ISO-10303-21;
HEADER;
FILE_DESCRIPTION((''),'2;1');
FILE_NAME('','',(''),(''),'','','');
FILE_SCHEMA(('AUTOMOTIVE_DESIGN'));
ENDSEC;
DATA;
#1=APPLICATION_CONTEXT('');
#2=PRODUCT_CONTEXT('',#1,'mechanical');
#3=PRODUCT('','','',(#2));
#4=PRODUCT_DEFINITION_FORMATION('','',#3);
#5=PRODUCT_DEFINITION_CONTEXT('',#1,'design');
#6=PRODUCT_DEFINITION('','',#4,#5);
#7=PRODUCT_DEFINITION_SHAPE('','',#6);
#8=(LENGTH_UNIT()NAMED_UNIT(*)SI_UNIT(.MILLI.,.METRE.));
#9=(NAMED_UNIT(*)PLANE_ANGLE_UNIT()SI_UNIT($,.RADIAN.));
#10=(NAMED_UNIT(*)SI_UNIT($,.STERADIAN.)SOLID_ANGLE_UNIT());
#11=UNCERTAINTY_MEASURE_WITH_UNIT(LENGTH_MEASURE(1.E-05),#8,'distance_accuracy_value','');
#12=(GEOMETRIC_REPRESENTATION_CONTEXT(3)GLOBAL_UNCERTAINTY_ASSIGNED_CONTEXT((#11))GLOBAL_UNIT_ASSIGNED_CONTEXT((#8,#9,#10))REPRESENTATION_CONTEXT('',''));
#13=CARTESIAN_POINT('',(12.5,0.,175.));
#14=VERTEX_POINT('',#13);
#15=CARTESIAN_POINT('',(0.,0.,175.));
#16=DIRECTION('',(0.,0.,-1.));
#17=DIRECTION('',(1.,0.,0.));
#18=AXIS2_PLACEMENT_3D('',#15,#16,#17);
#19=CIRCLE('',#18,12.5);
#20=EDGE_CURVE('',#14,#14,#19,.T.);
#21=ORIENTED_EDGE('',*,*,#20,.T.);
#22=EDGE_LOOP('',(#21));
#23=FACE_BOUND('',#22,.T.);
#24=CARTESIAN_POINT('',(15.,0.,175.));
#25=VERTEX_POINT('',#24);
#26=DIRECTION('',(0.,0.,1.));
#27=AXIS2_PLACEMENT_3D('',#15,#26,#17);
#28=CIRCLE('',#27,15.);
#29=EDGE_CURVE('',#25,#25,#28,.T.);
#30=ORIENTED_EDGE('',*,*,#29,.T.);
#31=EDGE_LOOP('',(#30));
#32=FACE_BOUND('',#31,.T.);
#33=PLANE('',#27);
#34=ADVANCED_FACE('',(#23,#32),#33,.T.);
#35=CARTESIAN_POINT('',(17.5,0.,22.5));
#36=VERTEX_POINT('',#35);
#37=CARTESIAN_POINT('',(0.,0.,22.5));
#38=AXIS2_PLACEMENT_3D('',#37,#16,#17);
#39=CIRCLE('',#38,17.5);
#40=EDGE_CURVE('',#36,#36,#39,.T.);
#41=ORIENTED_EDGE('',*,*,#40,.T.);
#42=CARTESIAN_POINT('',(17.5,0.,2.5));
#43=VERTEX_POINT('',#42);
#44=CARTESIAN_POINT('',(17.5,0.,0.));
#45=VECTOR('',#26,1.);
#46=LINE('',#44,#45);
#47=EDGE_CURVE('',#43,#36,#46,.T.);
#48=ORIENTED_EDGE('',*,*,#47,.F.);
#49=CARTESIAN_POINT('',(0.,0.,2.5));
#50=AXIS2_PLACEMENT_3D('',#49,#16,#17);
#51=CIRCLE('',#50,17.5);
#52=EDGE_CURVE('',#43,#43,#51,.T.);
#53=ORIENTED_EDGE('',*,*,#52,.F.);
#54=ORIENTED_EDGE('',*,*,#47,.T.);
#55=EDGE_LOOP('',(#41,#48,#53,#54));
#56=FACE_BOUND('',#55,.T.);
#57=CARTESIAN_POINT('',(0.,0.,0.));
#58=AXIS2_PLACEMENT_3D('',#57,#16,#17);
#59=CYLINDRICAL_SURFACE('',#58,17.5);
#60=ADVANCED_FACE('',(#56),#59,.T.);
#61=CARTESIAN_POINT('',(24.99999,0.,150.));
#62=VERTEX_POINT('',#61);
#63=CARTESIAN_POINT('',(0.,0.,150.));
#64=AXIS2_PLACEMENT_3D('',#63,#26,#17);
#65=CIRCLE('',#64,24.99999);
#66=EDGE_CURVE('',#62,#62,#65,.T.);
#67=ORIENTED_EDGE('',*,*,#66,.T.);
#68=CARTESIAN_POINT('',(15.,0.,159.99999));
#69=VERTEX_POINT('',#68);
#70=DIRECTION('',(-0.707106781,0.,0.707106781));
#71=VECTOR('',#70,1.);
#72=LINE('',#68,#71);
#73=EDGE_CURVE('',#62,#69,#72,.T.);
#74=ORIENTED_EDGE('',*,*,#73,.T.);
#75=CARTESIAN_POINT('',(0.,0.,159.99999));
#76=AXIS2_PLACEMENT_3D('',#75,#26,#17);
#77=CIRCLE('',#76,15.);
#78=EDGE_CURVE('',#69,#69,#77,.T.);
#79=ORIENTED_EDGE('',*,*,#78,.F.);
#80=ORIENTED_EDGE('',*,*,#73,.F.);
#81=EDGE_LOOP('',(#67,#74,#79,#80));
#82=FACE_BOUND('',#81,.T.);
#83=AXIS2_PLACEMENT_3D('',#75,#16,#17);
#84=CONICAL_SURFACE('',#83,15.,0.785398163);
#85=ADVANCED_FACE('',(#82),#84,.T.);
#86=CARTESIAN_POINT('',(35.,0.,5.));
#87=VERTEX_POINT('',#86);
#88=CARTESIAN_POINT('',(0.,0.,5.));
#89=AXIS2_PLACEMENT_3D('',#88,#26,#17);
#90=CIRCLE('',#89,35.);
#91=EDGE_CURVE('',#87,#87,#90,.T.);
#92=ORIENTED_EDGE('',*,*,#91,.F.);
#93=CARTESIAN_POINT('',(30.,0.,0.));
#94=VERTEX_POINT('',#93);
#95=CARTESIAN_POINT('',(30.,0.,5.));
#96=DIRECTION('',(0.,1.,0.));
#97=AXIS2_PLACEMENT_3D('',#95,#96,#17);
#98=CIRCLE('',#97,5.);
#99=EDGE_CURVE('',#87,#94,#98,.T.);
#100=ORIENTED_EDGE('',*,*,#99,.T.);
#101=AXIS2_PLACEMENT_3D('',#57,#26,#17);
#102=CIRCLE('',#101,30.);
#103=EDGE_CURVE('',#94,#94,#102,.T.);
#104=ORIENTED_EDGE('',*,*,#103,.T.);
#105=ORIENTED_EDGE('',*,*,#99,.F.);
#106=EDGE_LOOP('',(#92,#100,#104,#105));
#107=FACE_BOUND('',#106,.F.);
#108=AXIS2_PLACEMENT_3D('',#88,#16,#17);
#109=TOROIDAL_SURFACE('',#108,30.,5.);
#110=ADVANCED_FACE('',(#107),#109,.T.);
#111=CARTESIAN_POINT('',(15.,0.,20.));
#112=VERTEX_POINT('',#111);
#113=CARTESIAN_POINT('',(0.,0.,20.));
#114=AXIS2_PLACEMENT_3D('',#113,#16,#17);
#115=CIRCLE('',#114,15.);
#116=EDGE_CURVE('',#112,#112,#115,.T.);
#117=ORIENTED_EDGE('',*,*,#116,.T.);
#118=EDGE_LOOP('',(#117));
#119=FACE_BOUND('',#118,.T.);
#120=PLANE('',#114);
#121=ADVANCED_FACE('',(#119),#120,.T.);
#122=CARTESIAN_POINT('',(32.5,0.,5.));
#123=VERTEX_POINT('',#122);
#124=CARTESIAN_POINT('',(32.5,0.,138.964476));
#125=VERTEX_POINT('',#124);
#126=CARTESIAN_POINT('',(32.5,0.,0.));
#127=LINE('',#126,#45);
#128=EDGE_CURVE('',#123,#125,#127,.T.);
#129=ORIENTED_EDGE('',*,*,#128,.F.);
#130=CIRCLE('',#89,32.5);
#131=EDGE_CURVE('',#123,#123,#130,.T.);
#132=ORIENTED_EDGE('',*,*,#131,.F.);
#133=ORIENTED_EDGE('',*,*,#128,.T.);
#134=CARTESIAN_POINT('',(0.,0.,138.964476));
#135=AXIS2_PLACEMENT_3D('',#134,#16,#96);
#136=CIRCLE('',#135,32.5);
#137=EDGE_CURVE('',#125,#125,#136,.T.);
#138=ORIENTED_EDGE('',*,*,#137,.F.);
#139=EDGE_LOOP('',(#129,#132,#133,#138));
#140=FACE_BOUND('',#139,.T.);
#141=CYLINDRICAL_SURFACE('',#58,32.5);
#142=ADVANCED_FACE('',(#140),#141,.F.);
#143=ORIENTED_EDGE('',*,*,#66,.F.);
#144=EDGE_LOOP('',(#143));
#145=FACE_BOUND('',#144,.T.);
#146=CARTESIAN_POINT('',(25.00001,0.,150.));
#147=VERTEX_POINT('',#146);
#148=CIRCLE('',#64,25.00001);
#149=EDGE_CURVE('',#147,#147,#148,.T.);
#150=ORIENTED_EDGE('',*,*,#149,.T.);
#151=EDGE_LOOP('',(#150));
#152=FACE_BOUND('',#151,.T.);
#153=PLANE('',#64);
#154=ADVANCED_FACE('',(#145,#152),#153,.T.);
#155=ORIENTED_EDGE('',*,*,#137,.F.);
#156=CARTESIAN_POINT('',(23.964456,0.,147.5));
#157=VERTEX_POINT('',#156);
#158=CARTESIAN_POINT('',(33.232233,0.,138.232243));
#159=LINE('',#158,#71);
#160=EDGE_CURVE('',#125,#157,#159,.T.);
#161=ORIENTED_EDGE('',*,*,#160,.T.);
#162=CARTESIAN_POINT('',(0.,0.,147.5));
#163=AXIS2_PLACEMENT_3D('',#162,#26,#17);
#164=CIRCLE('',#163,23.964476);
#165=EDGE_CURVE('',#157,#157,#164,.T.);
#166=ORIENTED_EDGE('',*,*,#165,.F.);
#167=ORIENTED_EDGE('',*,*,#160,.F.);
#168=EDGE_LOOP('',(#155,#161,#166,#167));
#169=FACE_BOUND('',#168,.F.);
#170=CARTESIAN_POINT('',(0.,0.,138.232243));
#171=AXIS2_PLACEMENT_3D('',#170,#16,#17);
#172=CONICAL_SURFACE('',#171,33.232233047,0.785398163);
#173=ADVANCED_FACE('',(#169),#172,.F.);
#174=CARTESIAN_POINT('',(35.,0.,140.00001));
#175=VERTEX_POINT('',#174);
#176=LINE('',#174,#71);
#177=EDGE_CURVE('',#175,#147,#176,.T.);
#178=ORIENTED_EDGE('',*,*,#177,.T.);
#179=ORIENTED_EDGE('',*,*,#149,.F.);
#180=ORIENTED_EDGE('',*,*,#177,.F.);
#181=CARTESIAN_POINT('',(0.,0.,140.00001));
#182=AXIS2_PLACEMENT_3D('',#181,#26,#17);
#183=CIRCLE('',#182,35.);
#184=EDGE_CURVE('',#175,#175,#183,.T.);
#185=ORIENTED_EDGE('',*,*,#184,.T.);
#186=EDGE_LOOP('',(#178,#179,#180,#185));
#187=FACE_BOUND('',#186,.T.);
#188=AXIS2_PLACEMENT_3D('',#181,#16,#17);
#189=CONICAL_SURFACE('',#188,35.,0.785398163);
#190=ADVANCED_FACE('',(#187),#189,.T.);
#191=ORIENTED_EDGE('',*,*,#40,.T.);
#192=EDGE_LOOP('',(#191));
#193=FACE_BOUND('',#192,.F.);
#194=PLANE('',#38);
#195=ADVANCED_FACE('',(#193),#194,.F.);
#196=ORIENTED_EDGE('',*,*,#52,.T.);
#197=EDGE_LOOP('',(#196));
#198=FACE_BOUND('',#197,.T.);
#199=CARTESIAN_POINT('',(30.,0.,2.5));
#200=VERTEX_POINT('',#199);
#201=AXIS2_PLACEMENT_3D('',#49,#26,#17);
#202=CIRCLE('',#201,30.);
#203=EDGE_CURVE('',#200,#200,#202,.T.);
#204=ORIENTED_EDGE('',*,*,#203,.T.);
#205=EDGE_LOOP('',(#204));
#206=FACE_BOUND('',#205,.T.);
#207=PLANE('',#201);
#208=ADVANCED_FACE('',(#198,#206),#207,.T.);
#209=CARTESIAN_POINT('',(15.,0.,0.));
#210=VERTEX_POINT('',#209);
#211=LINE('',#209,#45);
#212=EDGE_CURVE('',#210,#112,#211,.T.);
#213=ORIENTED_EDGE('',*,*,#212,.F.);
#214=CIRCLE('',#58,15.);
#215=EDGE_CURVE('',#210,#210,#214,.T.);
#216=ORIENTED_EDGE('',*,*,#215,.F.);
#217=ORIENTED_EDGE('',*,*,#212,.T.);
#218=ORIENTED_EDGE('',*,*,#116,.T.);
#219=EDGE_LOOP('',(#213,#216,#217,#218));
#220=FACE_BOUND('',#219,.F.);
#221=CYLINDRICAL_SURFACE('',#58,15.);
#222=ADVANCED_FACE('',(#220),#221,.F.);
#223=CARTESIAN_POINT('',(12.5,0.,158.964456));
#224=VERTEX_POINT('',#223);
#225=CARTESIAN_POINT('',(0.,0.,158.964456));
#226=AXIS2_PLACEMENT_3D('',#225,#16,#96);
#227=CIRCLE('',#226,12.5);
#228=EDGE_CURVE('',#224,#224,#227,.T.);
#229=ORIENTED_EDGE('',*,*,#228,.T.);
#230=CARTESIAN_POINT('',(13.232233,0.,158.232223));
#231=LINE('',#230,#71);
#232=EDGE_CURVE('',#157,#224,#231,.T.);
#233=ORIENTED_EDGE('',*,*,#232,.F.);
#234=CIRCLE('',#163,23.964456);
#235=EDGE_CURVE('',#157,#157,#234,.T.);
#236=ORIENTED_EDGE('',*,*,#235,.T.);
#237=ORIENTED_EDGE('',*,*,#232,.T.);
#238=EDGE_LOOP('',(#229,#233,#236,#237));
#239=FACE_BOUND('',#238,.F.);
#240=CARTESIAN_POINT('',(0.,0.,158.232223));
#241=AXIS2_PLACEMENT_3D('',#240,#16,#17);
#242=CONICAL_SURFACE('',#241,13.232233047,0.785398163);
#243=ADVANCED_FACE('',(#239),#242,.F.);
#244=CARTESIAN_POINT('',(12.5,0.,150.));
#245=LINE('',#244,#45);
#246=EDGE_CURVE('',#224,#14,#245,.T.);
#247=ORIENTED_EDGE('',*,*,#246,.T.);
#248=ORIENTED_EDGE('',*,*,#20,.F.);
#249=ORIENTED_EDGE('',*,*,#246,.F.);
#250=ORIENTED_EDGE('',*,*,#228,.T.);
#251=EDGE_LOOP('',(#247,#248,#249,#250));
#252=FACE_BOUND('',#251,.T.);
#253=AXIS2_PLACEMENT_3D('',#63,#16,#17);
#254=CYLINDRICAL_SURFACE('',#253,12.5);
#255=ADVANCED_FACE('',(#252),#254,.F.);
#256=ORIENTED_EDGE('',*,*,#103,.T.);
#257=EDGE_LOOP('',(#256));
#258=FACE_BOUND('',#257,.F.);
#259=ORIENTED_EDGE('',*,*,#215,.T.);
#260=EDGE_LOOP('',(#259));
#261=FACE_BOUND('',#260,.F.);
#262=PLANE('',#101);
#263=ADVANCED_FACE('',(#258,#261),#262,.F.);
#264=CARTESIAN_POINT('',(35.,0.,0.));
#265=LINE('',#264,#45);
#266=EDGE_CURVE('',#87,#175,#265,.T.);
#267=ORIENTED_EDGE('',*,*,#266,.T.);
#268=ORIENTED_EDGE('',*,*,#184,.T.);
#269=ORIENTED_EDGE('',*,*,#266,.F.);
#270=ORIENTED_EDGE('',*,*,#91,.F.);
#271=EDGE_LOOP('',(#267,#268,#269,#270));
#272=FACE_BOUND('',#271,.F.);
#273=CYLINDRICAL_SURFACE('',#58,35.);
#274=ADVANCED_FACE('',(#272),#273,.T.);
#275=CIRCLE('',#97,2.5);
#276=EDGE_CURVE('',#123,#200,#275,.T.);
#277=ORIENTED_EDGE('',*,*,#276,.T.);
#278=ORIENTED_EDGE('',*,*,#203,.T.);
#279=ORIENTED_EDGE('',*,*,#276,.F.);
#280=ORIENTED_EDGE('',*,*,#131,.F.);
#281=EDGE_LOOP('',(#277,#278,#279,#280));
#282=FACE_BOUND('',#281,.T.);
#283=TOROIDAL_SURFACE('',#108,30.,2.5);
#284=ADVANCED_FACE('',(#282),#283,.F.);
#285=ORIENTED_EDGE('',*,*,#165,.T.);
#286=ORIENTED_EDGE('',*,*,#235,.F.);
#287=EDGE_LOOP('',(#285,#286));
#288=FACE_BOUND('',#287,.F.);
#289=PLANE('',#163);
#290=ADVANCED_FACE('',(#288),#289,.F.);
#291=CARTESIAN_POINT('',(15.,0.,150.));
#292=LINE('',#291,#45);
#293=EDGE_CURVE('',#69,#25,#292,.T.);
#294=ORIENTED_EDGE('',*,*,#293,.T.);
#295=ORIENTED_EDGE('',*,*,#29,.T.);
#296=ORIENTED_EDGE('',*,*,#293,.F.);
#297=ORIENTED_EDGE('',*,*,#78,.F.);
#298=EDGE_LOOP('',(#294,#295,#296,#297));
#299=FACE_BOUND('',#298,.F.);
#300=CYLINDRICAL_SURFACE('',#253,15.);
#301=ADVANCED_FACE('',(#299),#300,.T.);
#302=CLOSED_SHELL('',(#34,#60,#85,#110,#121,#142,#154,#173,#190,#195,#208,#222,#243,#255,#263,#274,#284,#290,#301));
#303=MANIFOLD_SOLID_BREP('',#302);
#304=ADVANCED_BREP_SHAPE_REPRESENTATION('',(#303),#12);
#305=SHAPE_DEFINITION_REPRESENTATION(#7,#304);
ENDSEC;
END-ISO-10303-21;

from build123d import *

# Parameters (mm, degrees)
F0_R     = 35
F1_DEPTH = 150
F2_R     = 15
F3_DEPTH = 25
F4_R     = 5
F5_R     = 15
F6_DEPTH = 20
F7_SIZE  = 9.99999
F8_T     = -2.5


# Not quite as in the source:
# - a fillet or chamfer is up to 0.001 mm smaller than in the source, because OpenCascade refuses the exact size


with BuildPart() as f1:
    # F0 (on Top) → F1 (new body)
    with BuildSketch(Plane.XY):
        Circle(F0_R)
    extrude(amount=F1_DEPTH)

    # F2 (on face) → F3 (join)
    with BuildSketch(Plane.XY.offset(150)):
        Circle(F2_R)
    extrude(amount=F3_DEPTH)

    # F4
    f4_edges = [f1.edges().sort_by_distance(p)[0] for p in [
        (-35, 0, 0),
    ]]
    fillet(f4_edges, radius=F4_R)

    # F5 (on face) → F6 (cut)
    with BuildSketch(Plane(origin=(0, 0, 0), x_dir=(1, 0, 0), z_dir=(0, 0, -1))):
        Circle(F5_R)
    extrude(amount=-F6_DEPTH, mode=Mode.SUBTRACT)

    # F7 (size 10 in the source; OpenCascade refuses exactly that, so slightly less here)
    f7_edges = [f1.edges().sort_by_distance(p)[0] for p in [
        (-35, 0, 150),
        (-15, 0, 150),
    ]]
    chamfer(f7_edges, length=F7_SIZE)

    # F8
    f8_openings = [f1.faces().sort_by_distance(p)[0] for p in [
        (0, 0, 175),
    ]]
    offset(amount=F8_T, openings=f8_openings, kind=Kind.INTERSECTION)


solid = f1.part
